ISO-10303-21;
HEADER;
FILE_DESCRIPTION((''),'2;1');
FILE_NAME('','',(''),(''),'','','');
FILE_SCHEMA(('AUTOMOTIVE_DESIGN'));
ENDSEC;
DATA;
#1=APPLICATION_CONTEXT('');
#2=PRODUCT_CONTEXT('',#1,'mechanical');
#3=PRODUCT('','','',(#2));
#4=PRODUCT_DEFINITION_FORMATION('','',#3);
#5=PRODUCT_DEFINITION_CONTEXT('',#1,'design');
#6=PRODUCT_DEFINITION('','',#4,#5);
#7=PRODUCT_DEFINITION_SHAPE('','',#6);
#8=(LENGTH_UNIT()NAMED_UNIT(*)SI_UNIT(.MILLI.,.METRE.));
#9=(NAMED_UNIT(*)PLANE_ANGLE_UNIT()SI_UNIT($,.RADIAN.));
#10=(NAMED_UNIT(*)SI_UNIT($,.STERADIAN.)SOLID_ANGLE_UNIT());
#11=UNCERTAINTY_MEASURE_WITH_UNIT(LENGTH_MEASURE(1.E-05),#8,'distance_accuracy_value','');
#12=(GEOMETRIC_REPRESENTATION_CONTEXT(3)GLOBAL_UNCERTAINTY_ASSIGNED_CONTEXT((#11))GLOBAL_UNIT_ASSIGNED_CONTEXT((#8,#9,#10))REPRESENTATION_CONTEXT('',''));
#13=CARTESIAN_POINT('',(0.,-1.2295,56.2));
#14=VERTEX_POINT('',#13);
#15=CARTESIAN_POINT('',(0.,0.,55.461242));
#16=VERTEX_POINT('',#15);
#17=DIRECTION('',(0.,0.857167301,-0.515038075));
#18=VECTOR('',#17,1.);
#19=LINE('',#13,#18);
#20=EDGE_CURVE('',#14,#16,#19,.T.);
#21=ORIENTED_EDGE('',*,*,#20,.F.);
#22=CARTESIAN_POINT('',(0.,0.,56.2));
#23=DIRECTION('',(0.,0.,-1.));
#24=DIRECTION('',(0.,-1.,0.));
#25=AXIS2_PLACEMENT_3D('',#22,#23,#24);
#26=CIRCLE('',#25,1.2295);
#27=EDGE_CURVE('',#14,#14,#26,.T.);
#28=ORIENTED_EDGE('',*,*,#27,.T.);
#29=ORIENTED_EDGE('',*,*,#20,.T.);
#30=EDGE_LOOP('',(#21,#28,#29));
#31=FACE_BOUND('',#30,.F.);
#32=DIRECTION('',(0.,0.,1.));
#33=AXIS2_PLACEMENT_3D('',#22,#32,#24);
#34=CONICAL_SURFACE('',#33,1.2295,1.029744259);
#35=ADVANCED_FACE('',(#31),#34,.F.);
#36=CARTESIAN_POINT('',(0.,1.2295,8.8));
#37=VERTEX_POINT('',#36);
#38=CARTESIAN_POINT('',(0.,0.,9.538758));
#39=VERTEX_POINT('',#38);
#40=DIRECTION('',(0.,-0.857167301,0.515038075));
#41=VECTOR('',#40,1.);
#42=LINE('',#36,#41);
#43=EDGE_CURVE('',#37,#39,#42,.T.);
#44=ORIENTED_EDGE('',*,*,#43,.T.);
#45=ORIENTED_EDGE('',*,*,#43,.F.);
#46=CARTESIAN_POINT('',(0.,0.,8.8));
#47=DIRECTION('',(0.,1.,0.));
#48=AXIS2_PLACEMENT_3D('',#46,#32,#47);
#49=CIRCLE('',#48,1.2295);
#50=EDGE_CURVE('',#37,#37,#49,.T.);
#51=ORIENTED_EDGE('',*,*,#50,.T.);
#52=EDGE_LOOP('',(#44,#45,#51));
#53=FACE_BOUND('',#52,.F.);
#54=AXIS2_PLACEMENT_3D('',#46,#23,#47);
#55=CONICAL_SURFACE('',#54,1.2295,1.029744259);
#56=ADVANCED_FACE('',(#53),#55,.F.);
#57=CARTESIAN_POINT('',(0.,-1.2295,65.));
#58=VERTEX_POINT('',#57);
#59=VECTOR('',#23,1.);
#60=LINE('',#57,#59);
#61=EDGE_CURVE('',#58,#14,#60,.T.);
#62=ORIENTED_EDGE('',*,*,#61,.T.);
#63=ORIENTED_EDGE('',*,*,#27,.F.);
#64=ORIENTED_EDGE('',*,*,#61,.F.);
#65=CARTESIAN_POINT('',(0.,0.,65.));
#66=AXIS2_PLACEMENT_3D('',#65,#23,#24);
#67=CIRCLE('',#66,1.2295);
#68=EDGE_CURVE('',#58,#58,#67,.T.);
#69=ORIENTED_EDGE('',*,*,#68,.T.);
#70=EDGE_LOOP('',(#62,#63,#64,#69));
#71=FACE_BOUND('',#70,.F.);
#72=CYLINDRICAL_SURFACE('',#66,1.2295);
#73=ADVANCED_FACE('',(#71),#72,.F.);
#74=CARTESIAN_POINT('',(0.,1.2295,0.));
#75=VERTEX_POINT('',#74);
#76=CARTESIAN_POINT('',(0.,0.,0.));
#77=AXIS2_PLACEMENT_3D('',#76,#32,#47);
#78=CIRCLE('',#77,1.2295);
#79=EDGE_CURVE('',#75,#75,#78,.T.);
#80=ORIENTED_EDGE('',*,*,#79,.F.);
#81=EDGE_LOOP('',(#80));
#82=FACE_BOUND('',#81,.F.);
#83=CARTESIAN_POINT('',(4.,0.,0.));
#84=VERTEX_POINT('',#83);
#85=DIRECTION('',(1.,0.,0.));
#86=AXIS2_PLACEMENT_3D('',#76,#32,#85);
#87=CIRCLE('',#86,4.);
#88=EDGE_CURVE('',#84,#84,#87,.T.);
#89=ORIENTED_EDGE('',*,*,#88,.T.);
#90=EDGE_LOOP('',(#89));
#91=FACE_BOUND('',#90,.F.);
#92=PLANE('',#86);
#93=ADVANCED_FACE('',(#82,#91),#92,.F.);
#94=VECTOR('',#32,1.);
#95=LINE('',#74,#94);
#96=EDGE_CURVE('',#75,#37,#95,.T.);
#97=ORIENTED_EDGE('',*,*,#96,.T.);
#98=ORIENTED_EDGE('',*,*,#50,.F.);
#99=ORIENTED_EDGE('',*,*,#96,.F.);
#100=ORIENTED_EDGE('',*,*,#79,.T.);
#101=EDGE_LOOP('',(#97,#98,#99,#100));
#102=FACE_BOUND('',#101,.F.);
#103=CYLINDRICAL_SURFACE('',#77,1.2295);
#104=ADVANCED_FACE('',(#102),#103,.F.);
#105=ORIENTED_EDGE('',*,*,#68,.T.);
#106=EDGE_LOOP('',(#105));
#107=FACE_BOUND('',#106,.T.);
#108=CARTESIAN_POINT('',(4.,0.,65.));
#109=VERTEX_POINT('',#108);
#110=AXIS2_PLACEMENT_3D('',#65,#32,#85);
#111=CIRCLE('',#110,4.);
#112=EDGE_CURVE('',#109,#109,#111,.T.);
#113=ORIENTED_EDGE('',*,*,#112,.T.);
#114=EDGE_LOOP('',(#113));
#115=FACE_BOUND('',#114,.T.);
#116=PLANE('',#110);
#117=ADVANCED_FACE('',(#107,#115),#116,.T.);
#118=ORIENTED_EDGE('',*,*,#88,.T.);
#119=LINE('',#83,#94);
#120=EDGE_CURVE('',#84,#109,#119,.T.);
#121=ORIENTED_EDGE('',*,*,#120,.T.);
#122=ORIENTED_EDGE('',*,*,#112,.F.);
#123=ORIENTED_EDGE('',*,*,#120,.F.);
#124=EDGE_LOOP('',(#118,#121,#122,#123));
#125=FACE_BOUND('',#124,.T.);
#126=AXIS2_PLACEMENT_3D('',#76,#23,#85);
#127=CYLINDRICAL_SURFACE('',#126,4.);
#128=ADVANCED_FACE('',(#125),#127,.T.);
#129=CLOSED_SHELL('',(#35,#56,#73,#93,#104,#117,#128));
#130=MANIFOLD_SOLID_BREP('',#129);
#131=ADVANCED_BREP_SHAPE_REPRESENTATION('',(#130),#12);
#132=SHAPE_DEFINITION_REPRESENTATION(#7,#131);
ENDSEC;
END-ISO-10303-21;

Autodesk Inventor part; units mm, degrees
ref_plane "YZ Plane" through (0, 0, 0) normal (1, 0, 0) x (0, 1, 0)
ref_plane "XZ Plane" through (0, 0, 0) normal (0, 1, 0) x (-1, 0, 0)
ref_plane "XY Plane" through (0, 0, 0) normal (0, 0, 1) x (1, 0, 0)
sketch "スケッチ1" plane through (0, 0, 0) normal (0, 0, 1) x (1, 0, 0)
  circle A0 centre (0, 0) radius 4
  dimension "d0" = 8
extrude "押し出し1" add sketch "スケッチ1" along normal blind 65
sketch "スケッチ2" plane through (0, 0, 65) normal (0, 0, 1) x (1, 0, 0)
  point P0 (0, 0)
  point P1 (0, 0)
hole "穴1" at (0, 0, 65) direction (0, 0, -1) diameter 2.459 depth 8.8 tip angle 118 thread size "M3x0.5" class "6H" standard "ANSI Metric M Profile"
sketch "スケッチ3" plane through (0, 0, 0) normal (0, 0, -1) x (-1, 0, 0)
  circle A0 centre (0, 0) radius 1.2295 projected
hole "穴2" at (0, 0, 0) direction (0, 0, 1) diameter 2.459 depth 8.8 tip angle 118 thread size "M3x0.5" class "6H" standard "ANSI Metric M Profile"
properties part number "link1part4" material "アルミニウム 6061"
